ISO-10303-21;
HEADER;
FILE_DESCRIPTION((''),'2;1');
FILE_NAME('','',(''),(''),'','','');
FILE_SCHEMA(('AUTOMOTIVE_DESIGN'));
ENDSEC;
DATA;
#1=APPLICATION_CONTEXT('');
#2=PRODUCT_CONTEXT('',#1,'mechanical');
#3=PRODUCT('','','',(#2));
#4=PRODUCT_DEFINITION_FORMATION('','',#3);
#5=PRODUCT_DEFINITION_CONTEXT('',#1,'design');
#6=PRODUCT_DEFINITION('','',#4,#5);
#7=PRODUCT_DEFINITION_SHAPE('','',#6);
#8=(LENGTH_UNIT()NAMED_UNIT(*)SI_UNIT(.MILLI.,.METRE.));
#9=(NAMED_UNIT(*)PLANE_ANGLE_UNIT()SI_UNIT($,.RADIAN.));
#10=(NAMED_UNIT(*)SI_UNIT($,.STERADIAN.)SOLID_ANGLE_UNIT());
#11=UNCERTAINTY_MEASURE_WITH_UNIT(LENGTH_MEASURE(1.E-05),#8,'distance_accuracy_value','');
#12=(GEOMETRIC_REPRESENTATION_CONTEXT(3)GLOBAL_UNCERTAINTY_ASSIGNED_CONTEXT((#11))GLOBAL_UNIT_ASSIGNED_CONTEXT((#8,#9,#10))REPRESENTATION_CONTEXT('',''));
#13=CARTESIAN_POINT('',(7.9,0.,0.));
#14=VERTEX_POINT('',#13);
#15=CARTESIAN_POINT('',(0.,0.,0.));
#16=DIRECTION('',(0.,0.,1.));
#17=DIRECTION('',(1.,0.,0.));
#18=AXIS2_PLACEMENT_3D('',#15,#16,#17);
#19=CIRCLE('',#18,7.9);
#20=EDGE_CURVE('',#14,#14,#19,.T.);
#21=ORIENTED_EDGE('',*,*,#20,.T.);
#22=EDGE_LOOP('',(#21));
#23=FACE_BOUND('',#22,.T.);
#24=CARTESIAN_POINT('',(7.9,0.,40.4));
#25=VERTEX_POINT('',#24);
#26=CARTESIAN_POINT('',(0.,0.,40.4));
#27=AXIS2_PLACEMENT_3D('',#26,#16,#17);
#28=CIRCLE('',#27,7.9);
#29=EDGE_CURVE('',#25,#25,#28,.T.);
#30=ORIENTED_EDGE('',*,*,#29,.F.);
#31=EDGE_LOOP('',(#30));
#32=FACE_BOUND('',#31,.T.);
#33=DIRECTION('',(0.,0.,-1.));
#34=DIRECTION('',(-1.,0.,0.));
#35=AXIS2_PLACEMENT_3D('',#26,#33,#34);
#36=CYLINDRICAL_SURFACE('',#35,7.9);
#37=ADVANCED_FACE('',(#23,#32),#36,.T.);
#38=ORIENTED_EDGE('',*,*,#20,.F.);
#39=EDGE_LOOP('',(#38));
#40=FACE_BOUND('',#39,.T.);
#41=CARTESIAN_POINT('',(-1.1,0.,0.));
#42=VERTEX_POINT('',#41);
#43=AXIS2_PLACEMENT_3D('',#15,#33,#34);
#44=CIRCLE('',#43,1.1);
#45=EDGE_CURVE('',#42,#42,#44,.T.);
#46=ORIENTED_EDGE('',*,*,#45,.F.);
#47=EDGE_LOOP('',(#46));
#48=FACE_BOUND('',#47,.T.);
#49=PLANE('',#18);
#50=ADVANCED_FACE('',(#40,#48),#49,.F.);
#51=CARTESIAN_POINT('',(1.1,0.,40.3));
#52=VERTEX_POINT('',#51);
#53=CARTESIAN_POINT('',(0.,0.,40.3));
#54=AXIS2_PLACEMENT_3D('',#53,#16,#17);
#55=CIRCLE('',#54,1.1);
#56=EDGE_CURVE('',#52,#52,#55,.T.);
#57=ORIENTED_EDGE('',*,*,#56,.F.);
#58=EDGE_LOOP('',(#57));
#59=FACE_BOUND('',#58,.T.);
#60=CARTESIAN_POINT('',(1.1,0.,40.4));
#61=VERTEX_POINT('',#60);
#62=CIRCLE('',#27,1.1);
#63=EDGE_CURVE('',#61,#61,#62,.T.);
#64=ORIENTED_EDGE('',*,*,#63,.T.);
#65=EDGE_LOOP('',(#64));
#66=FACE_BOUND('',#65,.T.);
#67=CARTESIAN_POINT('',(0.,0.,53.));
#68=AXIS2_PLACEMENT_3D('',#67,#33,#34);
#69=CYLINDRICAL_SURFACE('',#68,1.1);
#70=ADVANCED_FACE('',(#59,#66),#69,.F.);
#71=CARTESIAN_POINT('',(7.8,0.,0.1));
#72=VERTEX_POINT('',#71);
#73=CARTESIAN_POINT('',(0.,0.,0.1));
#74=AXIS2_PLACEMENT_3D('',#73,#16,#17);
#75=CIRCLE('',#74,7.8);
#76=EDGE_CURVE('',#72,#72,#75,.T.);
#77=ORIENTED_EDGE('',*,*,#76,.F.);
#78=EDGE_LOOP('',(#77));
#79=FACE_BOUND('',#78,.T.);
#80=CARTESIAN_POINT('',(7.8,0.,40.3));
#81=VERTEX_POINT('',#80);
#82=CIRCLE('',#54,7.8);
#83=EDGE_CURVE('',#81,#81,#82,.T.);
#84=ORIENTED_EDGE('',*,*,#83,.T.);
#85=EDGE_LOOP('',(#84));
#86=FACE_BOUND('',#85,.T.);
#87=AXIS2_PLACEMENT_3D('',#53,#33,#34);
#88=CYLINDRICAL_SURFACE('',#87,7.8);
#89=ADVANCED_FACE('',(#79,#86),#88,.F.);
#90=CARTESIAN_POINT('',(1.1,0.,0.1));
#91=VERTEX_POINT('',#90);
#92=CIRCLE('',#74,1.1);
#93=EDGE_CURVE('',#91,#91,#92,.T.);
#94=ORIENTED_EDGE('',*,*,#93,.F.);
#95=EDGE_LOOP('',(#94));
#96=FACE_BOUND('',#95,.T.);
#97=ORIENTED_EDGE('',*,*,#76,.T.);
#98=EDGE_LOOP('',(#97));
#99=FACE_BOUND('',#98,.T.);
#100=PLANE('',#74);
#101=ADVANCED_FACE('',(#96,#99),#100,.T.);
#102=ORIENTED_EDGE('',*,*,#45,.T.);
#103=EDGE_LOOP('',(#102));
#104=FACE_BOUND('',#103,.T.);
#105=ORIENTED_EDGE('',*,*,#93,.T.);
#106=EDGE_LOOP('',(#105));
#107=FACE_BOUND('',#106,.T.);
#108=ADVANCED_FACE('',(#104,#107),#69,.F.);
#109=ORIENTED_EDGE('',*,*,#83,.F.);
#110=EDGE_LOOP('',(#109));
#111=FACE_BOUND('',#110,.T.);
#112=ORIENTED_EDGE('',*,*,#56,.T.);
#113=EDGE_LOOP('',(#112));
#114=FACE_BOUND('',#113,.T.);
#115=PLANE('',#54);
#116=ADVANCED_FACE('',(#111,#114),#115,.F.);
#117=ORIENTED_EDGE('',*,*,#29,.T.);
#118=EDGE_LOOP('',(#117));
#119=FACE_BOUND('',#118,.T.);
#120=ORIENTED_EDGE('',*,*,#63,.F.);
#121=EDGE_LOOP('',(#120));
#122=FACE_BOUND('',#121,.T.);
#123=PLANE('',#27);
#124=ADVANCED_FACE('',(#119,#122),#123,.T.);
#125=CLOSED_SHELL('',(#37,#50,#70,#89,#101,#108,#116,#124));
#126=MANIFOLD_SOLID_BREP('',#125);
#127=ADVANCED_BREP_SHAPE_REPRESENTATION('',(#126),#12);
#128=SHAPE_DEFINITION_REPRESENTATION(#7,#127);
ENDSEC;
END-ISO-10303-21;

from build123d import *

# Parameters (mm, degrees)
SKETCH3_R          = 1.1
CUT_EXTRUDE1_DEPTH = 53


# Read off the part's stored shape, not the designer's step: Extrude-Thin1
with BuildPart() as part:
    # Extrude-Thin1 outline → Extrude-Thin1 (revolve)
    with BuildSketch(Plane.XZ):
        Polygon((7.9, 40.4), (0, 40.4), (0, 40.3), (7.8, 40.3), (7.8, 0.1), (0, 0.1), (0, 0), (7.9, 0), align=None)
    revolve(axis=Axis((0, 0, 0), (0, 0, 1)))

    # Sketch3 → Cut-Extrude1 (cut)
    with BuildSketch(Plane(origin=(0, 0, 0), x_dir=(-1, 0, 0), z_dir=(0, 0, -1))):
        Circle(SKETCH3_R)
    extrude(amount=-CUT_EXTRUDE1_DEPTH, mode=Mode.SUBTRACT)


solid = part.part
